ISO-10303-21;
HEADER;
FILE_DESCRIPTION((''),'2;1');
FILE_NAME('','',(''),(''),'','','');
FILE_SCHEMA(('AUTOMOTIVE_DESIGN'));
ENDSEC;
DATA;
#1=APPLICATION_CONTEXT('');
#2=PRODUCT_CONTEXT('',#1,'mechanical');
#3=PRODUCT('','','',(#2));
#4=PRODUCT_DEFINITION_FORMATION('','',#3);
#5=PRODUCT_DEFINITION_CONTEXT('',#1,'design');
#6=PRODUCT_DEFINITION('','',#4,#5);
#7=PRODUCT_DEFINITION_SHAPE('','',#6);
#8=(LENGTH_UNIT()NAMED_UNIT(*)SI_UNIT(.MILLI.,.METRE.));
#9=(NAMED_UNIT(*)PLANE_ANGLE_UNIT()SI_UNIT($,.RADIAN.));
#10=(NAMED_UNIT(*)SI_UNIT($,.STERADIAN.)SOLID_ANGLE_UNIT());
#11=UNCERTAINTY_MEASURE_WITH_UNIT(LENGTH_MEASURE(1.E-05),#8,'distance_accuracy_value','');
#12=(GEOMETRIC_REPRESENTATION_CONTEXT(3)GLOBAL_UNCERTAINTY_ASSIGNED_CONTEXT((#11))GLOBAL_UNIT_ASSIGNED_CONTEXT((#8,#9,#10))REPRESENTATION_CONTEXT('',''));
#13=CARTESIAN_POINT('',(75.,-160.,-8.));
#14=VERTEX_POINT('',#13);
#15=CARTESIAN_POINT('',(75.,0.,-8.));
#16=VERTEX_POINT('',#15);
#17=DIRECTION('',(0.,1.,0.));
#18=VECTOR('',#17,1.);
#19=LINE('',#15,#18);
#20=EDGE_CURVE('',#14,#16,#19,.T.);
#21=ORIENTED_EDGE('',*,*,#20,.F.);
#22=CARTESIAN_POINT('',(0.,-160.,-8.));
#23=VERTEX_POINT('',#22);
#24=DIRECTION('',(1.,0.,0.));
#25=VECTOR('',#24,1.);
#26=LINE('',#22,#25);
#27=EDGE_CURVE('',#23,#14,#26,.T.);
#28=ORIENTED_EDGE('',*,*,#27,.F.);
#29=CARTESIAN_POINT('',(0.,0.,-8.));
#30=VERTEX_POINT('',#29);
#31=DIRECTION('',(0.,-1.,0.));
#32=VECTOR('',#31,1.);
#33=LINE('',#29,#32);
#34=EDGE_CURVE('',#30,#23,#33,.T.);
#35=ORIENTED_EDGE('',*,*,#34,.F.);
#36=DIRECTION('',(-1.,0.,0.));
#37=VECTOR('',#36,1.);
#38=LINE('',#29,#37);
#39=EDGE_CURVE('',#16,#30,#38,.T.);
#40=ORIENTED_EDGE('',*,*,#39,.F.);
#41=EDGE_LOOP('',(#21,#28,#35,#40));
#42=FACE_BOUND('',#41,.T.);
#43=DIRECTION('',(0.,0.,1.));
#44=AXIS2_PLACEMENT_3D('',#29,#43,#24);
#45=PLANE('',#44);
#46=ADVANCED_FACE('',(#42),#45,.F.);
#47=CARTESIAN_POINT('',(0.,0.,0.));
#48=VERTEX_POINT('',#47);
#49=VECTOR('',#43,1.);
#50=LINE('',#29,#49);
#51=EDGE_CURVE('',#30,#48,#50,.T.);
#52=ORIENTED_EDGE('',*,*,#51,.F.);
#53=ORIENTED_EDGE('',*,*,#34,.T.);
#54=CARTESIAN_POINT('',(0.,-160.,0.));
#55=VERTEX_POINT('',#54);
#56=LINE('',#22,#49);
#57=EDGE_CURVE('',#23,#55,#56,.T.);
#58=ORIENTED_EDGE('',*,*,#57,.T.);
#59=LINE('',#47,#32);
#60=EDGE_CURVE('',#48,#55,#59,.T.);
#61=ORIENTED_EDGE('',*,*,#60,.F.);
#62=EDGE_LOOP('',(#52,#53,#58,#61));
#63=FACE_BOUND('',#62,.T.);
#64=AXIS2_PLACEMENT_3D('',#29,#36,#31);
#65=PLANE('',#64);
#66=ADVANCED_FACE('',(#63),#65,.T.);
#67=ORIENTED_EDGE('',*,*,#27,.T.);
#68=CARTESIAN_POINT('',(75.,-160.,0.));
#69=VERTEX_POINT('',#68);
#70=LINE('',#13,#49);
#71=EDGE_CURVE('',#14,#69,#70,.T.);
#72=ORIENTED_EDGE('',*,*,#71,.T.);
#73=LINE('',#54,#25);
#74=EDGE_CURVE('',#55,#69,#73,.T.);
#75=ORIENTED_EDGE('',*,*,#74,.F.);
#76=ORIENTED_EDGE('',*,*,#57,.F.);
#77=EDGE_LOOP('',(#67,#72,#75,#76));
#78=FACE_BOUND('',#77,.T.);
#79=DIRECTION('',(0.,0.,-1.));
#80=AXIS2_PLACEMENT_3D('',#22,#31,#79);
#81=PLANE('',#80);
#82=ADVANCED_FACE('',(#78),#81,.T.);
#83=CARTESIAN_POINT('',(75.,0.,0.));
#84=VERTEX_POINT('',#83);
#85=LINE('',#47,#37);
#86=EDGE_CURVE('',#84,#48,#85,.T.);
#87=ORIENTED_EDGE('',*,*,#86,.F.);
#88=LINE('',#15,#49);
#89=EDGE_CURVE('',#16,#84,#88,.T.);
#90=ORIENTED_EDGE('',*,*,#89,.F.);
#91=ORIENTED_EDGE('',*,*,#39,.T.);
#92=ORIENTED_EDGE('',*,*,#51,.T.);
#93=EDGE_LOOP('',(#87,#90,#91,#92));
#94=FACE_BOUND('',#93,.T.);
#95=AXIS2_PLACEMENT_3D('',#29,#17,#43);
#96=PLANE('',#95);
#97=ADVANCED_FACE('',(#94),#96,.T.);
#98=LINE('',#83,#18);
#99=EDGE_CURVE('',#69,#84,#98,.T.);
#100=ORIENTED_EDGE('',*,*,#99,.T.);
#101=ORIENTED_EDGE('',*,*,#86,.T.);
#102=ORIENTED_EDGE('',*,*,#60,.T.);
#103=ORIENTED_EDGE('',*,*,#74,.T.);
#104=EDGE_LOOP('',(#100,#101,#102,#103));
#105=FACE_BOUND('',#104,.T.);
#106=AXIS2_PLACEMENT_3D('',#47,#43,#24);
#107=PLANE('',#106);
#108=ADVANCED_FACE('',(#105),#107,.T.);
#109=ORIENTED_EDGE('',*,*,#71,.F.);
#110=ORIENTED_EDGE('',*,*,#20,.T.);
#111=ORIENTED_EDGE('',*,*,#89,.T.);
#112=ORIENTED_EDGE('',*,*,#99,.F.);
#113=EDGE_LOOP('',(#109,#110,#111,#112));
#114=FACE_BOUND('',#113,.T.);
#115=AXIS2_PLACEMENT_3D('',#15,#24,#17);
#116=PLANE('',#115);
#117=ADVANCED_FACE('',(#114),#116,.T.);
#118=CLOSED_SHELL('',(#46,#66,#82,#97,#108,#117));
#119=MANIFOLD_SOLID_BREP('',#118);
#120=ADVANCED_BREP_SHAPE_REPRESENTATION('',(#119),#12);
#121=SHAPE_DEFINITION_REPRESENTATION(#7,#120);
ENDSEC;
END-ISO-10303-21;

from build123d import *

# Parameters (mm, degrees)
SKETCH_1_W             = 75
SKETCH_1_H             = 160
SM_BASE_FLANGE_1_DEPTH = 8


# Sheet-metal steps are written as plain solids
with BuildPart() as part:
    # Sketch 1 → Базовая кромка1 (new body)
    with BuildSketch(Plane.XY):
        with Locations((37.5, -80)):
            Rectangle(SKETCH_1_W, SKETCH_1_H)
    extrude(amount=-SM_BASE_FLANGE_1_DEPTH)


solid = part.part
